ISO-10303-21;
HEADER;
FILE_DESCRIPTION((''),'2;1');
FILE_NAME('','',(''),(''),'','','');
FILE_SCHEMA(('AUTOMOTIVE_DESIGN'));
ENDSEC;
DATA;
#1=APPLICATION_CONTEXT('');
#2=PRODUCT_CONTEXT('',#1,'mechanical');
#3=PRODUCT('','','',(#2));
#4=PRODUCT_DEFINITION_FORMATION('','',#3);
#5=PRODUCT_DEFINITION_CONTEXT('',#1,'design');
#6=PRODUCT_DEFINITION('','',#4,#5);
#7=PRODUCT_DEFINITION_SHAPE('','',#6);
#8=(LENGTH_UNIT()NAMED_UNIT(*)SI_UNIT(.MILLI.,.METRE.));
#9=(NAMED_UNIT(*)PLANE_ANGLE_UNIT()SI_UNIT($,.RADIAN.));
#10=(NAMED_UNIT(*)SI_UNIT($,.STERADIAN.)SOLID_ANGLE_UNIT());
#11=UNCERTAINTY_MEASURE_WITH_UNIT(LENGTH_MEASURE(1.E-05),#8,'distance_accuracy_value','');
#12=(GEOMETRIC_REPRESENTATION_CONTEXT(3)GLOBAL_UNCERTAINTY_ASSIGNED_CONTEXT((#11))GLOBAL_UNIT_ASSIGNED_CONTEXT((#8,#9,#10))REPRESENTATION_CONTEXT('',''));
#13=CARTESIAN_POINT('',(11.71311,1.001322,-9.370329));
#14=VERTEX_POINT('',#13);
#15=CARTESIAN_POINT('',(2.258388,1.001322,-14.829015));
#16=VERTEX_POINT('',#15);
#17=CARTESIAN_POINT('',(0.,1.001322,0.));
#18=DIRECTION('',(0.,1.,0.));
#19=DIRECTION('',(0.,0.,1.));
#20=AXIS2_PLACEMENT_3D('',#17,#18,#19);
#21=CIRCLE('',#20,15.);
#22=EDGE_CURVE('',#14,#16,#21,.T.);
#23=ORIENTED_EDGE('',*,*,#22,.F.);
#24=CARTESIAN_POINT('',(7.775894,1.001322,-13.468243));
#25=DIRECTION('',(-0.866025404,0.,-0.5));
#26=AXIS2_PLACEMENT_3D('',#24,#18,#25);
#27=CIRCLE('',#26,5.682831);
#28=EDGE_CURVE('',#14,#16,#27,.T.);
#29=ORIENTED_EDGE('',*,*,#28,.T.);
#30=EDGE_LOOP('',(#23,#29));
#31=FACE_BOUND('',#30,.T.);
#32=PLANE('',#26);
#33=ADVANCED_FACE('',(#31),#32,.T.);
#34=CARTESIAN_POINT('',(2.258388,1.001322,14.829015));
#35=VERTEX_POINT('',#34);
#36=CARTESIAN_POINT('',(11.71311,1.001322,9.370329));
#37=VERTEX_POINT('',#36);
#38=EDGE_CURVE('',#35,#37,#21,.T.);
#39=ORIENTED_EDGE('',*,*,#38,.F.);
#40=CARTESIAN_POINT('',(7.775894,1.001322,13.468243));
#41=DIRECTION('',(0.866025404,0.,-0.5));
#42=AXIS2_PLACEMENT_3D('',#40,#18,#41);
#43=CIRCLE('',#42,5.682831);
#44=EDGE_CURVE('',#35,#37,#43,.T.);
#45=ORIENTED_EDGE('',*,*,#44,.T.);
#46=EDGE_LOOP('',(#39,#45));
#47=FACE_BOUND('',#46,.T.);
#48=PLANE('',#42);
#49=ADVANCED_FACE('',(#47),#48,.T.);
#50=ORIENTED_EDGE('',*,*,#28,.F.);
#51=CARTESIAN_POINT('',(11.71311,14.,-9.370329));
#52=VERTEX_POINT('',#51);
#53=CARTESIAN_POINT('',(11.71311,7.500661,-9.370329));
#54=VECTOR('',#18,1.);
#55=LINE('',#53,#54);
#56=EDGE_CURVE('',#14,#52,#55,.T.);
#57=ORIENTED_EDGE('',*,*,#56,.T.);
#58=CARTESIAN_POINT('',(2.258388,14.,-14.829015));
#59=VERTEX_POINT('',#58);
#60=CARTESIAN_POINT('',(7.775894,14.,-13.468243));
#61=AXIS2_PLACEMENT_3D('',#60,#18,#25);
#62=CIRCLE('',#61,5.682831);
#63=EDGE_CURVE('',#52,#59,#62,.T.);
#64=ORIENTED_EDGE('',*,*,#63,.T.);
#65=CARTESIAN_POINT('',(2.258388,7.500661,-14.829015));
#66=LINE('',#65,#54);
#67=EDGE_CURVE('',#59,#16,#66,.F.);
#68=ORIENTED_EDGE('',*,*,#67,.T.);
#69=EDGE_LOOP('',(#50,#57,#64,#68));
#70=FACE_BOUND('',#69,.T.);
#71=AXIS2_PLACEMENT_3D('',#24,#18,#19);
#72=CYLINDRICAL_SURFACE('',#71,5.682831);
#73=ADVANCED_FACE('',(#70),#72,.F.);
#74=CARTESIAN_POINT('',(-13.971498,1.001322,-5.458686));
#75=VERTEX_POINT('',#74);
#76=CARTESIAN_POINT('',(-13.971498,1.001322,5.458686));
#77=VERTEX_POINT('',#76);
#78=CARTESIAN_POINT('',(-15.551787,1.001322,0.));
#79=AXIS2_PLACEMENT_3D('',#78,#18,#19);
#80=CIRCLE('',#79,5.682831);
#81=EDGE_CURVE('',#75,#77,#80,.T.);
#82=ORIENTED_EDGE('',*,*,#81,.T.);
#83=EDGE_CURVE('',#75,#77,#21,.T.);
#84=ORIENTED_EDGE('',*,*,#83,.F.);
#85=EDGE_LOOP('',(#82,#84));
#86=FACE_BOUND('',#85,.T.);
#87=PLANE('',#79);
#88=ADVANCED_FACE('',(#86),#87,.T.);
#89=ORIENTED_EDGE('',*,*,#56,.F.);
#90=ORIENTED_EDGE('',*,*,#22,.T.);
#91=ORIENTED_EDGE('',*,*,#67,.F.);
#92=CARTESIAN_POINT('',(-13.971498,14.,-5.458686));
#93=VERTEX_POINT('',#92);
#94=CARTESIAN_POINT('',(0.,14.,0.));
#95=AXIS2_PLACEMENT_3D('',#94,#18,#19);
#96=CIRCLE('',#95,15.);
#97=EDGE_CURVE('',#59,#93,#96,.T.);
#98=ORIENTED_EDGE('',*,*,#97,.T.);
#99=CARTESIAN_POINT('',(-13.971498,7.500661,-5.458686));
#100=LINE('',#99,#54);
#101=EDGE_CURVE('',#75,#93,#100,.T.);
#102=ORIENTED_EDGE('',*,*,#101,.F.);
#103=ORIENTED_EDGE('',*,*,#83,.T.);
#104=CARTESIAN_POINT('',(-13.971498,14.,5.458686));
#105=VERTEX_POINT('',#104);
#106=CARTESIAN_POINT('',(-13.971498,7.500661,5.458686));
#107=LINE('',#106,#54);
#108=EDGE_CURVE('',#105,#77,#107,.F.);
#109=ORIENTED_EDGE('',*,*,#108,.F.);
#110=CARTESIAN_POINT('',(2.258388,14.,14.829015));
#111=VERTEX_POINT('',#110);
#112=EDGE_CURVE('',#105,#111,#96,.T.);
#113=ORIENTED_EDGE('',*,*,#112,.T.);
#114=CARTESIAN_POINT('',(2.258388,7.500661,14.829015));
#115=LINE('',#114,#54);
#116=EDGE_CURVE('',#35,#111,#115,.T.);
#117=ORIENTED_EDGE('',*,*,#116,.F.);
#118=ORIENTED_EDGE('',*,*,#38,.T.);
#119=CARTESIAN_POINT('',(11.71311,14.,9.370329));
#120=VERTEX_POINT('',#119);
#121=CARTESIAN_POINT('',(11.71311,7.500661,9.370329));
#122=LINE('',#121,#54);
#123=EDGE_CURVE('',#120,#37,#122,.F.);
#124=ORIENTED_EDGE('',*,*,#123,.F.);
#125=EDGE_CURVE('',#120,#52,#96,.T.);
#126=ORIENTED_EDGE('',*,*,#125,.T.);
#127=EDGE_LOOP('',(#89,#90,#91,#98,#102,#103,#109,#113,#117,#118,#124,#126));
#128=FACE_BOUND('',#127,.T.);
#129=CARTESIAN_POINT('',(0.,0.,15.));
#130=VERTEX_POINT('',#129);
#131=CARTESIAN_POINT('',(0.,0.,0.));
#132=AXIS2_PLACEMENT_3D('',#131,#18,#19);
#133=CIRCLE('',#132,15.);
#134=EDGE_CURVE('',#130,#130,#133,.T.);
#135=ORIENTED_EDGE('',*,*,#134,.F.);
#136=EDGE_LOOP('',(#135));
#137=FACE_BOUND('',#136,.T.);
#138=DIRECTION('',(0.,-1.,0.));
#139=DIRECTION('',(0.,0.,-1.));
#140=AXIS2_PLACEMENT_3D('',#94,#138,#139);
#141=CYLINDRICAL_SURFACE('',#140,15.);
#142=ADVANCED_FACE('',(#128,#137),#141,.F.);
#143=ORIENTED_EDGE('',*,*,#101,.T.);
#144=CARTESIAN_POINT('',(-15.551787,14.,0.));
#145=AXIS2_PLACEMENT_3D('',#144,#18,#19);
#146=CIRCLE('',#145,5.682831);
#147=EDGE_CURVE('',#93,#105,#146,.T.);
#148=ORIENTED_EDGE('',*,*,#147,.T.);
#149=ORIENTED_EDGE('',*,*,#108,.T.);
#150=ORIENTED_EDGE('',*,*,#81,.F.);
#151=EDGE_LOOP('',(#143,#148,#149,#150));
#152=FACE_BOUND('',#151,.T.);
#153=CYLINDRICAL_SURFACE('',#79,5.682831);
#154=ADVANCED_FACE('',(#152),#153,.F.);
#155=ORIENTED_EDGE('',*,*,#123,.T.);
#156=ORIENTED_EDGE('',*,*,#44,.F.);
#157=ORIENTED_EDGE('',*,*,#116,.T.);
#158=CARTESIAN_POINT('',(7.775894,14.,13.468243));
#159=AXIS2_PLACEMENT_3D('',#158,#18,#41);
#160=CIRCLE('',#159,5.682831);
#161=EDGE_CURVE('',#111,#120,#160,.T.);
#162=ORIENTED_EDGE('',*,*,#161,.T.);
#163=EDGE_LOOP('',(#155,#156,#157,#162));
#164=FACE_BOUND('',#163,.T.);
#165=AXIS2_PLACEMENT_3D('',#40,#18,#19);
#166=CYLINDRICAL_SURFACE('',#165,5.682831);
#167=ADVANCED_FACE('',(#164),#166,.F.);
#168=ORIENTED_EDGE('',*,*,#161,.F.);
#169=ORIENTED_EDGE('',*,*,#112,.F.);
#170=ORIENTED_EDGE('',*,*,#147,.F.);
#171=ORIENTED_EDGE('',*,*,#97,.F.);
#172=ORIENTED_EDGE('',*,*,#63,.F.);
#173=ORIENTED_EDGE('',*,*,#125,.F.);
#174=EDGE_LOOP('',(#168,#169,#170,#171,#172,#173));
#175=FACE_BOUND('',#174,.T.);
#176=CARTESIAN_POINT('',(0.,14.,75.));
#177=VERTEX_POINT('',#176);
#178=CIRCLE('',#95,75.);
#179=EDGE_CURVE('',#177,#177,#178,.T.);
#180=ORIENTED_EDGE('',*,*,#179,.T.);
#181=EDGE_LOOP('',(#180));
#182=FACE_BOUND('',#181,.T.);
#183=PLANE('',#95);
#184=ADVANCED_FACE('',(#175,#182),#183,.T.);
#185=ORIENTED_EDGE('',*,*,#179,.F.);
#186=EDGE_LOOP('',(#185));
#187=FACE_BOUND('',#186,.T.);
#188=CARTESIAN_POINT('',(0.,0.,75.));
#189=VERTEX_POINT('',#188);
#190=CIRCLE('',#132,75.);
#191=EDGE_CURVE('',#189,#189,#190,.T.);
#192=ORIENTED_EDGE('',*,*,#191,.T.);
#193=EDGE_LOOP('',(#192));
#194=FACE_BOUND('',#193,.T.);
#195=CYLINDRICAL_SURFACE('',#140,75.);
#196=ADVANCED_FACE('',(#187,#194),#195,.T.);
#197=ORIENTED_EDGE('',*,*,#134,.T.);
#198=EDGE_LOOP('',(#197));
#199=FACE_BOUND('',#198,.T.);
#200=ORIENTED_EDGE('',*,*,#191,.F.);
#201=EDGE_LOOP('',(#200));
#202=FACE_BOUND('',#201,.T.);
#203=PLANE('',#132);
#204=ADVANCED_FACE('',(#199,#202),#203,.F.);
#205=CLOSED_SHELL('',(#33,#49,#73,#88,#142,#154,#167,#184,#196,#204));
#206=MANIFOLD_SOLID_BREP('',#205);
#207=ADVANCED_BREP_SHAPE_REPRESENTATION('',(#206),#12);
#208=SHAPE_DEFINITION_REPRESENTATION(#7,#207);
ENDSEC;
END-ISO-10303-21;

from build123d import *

# Parameters (mm, degrees)
SKETCH1_R           = 75
BOSS_EXTRUDE1_DEPTH = 14
SKETCH2_R           = 15
CUT_EXTRUDE1_DEPTH  = 107.98598039
SKETCH3_R           = 5.682831188
CUT_EXTRUDE2_DEPTH  = 12.998677968
CIRPATTERN1_COUNT   = 3


with BuildPart() as part:
    # Sketch1 → Boss-Extrude1 (new body)
    with BuildSketch(Plane(origin=(0, 0, 0), x_dir=(1, 0, 0), z_dir=(0, 1, 0))):
        Circle(SKETCH1_R)
    extrude(amount=BOSS_EXTRUDE1_DEPTH)

    # Sketch2 → Cut-Extrude1 (cut, through all)
    with BuildSketch(Plane(origin=(0, 0, 0), x_dir=(1, 0, 0), z_dir=(0, 1, 0))):
        Circle(SKETCH2_R)
    extrude(amount=CUT_EXTRUDE1_DEPTH, mode=Mode.SUBTRACT)

    # Sketch3 → Cut-Extrude2 (cut)
    with BuildSketch(Plane(origin=(0, 14, 0), x_dir=(1, 0, 0), z_dir=(0, 1, 0))):
        with Locations((-15.55178737, 0)):
            Circle(SKETCH3_R)
    cut_extrude2 = extrude(amount=-CUT_EXTRUDE2_DEPTH, mode=Mode.SUBTRACT)

    # CirPattern1: Cut-Extrude2 ×3 about axis
    cirpattern1_axis = Axis((0, 0, 0), (0, 1, 0))
    for i in range(1, CIRPATTERN1_COUNT):
        add(cut_extrude2.rotate(cirpattern1_axis, i * 360 / CIRPATTERN1_COUNT), mode=Mode.SUBTRACT)


solid = part.part
